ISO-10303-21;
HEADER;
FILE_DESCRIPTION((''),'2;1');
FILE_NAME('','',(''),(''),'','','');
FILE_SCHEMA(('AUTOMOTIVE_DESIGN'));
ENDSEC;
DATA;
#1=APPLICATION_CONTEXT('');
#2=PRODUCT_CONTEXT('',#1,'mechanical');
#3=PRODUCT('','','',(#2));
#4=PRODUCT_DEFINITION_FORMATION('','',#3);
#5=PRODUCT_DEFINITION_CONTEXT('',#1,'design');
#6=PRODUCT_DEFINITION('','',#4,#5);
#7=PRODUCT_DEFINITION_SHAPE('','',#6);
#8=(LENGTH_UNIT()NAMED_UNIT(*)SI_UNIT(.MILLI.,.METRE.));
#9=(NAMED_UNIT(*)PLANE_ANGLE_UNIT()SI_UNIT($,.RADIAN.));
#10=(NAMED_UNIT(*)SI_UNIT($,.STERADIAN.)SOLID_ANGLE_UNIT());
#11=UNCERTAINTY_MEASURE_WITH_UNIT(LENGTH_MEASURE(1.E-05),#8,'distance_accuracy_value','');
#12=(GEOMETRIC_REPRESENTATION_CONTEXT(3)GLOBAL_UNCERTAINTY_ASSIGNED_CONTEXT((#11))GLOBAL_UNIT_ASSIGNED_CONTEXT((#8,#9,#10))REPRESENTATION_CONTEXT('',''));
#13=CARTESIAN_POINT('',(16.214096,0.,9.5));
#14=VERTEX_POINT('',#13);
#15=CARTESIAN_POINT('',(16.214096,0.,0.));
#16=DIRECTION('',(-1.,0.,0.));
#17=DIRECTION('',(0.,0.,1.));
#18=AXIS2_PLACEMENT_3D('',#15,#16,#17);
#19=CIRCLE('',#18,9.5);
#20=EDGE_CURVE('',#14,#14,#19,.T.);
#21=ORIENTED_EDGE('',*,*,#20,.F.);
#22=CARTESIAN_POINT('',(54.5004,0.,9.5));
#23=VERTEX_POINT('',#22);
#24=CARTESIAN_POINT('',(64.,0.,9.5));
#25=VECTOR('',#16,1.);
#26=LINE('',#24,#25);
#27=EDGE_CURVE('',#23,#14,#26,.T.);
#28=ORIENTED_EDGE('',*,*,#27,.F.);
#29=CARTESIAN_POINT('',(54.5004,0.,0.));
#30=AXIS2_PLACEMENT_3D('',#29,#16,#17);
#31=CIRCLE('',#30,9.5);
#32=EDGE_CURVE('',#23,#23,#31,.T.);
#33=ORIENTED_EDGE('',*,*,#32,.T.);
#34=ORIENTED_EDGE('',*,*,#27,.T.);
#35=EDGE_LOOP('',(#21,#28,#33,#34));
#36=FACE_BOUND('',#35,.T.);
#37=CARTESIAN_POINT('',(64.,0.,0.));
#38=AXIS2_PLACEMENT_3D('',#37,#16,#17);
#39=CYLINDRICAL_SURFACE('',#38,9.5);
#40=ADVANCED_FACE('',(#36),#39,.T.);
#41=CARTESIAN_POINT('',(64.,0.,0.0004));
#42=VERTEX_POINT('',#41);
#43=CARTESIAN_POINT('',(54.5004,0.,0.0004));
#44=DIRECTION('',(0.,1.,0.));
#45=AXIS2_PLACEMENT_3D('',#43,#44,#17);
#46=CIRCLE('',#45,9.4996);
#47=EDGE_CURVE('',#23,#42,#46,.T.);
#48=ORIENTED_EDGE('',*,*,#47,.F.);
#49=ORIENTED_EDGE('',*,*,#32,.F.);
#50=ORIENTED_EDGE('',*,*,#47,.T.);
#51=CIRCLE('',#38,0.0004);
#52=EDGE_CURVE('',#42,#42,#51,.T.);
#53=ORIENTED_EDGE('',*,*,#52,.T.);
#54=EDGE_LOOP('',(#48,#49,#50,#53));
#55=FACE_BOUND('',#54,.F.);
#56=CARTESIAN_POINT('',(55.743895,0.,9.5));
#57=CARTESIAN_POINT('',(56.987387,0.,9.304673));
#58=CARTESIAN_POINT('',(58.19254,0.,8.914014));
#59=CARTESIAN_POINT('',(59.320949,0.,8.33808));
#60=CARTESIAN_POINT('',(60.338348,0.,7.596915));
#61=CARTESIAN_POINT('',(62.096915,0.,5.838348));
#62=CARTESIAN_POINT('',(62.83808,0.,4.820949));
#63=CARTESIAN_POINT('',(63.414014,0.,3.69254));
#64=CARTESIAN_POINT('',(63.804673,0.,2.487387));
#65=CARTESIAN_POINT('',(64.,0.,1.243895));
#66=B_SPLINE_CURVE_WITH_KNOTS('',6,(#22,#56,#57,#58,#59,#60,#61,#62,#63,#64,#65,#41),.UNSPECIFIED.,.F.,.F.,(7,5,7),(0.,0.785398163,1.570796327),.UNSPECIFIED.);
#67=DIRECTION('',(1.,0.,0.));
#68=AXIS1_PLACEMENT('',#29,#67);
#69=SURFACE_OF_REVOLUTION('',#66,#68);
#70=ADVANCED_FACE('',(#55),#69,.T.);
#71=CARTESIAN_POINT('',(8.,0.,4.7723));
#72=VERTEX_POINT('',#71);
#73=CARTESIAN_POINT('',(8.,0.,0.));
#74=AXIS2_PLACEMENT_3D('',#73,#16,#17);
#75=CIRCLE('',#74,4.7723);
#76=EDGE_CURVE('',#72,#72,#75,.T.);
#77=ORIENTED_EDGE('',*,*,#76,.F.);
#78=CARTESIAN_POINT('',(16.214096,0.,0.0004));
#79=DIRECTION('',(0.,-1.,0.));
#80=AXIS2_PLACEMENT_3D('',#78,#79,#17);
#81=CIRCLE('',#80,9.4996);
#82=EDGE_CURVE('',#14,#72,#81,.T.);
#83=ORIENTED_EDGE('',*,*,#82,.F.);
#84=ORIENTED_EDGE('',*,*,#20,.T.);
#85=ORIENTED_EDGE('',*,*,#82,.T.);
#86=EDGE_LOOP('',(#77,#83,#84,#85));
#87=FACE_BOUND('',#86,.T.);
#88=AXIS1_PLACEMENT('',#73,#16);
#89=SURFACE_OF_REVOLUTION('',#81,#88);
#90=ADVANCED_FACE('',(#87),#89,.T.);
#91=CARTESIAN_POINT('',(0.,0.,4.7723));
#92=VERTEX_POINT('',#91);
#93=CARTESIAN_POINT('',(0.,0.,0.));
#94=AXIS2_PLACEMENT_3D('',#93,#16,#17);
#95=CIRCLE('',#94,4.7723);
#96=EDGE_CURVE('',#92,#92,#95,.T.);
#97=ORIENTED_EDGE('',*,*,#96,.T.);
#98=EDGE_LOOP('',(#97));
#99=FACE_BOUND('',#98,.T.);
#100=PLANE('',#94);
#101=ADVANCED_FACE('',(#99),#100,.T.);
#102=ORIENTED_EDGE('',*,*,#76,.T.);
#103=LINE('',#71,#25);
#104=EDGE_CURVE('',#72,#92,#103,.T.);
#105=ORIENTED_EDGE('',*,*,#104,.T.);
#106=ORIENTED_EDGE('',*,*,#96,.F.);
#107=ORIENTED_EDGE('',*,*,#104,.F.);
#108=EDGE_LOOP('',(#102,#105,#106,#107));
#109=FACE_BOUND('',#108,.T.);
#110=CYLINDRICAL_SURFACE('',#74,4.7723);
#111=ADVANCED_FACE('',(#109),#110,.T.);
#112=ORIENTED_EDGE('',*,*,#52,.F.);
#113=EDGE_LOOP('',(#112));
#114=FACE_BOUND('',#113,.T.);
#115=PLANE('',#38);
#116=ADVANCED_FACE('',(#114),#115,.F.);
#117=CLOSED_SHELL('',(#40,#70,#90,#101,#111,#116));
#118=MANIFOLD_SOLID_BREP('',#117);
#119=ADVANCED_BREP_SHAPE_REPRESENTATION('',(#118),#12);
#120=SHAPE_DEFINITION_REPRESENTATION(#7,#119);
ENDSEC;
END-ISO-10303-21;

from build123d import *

# Parameters (mm, degrees)
F3_R = 9.4996


# Not quite as in the source:
# - a fillet or chamfer that OpenCascade refuses, or shapes differently, is made with other operations: its cross-section is extruded or revolved along the edge and cut away or added


with BuildPart() as f1:
    # F0 (on Front) → F1 (revolve)
    with BuildSketch(Plane.XZ):
        Polygon((0, 4.7723002699), (0, 0), (64, 0), (64, 9.5), (8, 9.5), (8, 4.7723002699), align=None)
    revolve(axis=Axis((32, 0, 0), (-1, 0, 0)))

    # F2: fillet of radius 9.4996 on 1 edges, made by hand

    # F2_s1 → F2_t2 (revolve, cut)
    with BuildSketch(Plane.XZ):
        with BuildLine():
            ThreePointArc((16.2140956882, 9.5), (11.4753587068, 8.2336722524), (8, 4.7723002699))
            Line((8, 4.7723002699), (8, 9.5))
            Line((8, 9.5), (16.2140956882, 9.5))
        make_face()
    revolve(axis=Axis((8, 0, 0), (-1, 0, 0)), mode=Mode.SUBTRACT)

    # F3
    f3_edges = [f1.edges().sort_by_distance(p)[0] for p in [
        (64, 0, -9.5),
    ]]
    fillet(f3_edges, radius=F3_R)


solid = f1.part
